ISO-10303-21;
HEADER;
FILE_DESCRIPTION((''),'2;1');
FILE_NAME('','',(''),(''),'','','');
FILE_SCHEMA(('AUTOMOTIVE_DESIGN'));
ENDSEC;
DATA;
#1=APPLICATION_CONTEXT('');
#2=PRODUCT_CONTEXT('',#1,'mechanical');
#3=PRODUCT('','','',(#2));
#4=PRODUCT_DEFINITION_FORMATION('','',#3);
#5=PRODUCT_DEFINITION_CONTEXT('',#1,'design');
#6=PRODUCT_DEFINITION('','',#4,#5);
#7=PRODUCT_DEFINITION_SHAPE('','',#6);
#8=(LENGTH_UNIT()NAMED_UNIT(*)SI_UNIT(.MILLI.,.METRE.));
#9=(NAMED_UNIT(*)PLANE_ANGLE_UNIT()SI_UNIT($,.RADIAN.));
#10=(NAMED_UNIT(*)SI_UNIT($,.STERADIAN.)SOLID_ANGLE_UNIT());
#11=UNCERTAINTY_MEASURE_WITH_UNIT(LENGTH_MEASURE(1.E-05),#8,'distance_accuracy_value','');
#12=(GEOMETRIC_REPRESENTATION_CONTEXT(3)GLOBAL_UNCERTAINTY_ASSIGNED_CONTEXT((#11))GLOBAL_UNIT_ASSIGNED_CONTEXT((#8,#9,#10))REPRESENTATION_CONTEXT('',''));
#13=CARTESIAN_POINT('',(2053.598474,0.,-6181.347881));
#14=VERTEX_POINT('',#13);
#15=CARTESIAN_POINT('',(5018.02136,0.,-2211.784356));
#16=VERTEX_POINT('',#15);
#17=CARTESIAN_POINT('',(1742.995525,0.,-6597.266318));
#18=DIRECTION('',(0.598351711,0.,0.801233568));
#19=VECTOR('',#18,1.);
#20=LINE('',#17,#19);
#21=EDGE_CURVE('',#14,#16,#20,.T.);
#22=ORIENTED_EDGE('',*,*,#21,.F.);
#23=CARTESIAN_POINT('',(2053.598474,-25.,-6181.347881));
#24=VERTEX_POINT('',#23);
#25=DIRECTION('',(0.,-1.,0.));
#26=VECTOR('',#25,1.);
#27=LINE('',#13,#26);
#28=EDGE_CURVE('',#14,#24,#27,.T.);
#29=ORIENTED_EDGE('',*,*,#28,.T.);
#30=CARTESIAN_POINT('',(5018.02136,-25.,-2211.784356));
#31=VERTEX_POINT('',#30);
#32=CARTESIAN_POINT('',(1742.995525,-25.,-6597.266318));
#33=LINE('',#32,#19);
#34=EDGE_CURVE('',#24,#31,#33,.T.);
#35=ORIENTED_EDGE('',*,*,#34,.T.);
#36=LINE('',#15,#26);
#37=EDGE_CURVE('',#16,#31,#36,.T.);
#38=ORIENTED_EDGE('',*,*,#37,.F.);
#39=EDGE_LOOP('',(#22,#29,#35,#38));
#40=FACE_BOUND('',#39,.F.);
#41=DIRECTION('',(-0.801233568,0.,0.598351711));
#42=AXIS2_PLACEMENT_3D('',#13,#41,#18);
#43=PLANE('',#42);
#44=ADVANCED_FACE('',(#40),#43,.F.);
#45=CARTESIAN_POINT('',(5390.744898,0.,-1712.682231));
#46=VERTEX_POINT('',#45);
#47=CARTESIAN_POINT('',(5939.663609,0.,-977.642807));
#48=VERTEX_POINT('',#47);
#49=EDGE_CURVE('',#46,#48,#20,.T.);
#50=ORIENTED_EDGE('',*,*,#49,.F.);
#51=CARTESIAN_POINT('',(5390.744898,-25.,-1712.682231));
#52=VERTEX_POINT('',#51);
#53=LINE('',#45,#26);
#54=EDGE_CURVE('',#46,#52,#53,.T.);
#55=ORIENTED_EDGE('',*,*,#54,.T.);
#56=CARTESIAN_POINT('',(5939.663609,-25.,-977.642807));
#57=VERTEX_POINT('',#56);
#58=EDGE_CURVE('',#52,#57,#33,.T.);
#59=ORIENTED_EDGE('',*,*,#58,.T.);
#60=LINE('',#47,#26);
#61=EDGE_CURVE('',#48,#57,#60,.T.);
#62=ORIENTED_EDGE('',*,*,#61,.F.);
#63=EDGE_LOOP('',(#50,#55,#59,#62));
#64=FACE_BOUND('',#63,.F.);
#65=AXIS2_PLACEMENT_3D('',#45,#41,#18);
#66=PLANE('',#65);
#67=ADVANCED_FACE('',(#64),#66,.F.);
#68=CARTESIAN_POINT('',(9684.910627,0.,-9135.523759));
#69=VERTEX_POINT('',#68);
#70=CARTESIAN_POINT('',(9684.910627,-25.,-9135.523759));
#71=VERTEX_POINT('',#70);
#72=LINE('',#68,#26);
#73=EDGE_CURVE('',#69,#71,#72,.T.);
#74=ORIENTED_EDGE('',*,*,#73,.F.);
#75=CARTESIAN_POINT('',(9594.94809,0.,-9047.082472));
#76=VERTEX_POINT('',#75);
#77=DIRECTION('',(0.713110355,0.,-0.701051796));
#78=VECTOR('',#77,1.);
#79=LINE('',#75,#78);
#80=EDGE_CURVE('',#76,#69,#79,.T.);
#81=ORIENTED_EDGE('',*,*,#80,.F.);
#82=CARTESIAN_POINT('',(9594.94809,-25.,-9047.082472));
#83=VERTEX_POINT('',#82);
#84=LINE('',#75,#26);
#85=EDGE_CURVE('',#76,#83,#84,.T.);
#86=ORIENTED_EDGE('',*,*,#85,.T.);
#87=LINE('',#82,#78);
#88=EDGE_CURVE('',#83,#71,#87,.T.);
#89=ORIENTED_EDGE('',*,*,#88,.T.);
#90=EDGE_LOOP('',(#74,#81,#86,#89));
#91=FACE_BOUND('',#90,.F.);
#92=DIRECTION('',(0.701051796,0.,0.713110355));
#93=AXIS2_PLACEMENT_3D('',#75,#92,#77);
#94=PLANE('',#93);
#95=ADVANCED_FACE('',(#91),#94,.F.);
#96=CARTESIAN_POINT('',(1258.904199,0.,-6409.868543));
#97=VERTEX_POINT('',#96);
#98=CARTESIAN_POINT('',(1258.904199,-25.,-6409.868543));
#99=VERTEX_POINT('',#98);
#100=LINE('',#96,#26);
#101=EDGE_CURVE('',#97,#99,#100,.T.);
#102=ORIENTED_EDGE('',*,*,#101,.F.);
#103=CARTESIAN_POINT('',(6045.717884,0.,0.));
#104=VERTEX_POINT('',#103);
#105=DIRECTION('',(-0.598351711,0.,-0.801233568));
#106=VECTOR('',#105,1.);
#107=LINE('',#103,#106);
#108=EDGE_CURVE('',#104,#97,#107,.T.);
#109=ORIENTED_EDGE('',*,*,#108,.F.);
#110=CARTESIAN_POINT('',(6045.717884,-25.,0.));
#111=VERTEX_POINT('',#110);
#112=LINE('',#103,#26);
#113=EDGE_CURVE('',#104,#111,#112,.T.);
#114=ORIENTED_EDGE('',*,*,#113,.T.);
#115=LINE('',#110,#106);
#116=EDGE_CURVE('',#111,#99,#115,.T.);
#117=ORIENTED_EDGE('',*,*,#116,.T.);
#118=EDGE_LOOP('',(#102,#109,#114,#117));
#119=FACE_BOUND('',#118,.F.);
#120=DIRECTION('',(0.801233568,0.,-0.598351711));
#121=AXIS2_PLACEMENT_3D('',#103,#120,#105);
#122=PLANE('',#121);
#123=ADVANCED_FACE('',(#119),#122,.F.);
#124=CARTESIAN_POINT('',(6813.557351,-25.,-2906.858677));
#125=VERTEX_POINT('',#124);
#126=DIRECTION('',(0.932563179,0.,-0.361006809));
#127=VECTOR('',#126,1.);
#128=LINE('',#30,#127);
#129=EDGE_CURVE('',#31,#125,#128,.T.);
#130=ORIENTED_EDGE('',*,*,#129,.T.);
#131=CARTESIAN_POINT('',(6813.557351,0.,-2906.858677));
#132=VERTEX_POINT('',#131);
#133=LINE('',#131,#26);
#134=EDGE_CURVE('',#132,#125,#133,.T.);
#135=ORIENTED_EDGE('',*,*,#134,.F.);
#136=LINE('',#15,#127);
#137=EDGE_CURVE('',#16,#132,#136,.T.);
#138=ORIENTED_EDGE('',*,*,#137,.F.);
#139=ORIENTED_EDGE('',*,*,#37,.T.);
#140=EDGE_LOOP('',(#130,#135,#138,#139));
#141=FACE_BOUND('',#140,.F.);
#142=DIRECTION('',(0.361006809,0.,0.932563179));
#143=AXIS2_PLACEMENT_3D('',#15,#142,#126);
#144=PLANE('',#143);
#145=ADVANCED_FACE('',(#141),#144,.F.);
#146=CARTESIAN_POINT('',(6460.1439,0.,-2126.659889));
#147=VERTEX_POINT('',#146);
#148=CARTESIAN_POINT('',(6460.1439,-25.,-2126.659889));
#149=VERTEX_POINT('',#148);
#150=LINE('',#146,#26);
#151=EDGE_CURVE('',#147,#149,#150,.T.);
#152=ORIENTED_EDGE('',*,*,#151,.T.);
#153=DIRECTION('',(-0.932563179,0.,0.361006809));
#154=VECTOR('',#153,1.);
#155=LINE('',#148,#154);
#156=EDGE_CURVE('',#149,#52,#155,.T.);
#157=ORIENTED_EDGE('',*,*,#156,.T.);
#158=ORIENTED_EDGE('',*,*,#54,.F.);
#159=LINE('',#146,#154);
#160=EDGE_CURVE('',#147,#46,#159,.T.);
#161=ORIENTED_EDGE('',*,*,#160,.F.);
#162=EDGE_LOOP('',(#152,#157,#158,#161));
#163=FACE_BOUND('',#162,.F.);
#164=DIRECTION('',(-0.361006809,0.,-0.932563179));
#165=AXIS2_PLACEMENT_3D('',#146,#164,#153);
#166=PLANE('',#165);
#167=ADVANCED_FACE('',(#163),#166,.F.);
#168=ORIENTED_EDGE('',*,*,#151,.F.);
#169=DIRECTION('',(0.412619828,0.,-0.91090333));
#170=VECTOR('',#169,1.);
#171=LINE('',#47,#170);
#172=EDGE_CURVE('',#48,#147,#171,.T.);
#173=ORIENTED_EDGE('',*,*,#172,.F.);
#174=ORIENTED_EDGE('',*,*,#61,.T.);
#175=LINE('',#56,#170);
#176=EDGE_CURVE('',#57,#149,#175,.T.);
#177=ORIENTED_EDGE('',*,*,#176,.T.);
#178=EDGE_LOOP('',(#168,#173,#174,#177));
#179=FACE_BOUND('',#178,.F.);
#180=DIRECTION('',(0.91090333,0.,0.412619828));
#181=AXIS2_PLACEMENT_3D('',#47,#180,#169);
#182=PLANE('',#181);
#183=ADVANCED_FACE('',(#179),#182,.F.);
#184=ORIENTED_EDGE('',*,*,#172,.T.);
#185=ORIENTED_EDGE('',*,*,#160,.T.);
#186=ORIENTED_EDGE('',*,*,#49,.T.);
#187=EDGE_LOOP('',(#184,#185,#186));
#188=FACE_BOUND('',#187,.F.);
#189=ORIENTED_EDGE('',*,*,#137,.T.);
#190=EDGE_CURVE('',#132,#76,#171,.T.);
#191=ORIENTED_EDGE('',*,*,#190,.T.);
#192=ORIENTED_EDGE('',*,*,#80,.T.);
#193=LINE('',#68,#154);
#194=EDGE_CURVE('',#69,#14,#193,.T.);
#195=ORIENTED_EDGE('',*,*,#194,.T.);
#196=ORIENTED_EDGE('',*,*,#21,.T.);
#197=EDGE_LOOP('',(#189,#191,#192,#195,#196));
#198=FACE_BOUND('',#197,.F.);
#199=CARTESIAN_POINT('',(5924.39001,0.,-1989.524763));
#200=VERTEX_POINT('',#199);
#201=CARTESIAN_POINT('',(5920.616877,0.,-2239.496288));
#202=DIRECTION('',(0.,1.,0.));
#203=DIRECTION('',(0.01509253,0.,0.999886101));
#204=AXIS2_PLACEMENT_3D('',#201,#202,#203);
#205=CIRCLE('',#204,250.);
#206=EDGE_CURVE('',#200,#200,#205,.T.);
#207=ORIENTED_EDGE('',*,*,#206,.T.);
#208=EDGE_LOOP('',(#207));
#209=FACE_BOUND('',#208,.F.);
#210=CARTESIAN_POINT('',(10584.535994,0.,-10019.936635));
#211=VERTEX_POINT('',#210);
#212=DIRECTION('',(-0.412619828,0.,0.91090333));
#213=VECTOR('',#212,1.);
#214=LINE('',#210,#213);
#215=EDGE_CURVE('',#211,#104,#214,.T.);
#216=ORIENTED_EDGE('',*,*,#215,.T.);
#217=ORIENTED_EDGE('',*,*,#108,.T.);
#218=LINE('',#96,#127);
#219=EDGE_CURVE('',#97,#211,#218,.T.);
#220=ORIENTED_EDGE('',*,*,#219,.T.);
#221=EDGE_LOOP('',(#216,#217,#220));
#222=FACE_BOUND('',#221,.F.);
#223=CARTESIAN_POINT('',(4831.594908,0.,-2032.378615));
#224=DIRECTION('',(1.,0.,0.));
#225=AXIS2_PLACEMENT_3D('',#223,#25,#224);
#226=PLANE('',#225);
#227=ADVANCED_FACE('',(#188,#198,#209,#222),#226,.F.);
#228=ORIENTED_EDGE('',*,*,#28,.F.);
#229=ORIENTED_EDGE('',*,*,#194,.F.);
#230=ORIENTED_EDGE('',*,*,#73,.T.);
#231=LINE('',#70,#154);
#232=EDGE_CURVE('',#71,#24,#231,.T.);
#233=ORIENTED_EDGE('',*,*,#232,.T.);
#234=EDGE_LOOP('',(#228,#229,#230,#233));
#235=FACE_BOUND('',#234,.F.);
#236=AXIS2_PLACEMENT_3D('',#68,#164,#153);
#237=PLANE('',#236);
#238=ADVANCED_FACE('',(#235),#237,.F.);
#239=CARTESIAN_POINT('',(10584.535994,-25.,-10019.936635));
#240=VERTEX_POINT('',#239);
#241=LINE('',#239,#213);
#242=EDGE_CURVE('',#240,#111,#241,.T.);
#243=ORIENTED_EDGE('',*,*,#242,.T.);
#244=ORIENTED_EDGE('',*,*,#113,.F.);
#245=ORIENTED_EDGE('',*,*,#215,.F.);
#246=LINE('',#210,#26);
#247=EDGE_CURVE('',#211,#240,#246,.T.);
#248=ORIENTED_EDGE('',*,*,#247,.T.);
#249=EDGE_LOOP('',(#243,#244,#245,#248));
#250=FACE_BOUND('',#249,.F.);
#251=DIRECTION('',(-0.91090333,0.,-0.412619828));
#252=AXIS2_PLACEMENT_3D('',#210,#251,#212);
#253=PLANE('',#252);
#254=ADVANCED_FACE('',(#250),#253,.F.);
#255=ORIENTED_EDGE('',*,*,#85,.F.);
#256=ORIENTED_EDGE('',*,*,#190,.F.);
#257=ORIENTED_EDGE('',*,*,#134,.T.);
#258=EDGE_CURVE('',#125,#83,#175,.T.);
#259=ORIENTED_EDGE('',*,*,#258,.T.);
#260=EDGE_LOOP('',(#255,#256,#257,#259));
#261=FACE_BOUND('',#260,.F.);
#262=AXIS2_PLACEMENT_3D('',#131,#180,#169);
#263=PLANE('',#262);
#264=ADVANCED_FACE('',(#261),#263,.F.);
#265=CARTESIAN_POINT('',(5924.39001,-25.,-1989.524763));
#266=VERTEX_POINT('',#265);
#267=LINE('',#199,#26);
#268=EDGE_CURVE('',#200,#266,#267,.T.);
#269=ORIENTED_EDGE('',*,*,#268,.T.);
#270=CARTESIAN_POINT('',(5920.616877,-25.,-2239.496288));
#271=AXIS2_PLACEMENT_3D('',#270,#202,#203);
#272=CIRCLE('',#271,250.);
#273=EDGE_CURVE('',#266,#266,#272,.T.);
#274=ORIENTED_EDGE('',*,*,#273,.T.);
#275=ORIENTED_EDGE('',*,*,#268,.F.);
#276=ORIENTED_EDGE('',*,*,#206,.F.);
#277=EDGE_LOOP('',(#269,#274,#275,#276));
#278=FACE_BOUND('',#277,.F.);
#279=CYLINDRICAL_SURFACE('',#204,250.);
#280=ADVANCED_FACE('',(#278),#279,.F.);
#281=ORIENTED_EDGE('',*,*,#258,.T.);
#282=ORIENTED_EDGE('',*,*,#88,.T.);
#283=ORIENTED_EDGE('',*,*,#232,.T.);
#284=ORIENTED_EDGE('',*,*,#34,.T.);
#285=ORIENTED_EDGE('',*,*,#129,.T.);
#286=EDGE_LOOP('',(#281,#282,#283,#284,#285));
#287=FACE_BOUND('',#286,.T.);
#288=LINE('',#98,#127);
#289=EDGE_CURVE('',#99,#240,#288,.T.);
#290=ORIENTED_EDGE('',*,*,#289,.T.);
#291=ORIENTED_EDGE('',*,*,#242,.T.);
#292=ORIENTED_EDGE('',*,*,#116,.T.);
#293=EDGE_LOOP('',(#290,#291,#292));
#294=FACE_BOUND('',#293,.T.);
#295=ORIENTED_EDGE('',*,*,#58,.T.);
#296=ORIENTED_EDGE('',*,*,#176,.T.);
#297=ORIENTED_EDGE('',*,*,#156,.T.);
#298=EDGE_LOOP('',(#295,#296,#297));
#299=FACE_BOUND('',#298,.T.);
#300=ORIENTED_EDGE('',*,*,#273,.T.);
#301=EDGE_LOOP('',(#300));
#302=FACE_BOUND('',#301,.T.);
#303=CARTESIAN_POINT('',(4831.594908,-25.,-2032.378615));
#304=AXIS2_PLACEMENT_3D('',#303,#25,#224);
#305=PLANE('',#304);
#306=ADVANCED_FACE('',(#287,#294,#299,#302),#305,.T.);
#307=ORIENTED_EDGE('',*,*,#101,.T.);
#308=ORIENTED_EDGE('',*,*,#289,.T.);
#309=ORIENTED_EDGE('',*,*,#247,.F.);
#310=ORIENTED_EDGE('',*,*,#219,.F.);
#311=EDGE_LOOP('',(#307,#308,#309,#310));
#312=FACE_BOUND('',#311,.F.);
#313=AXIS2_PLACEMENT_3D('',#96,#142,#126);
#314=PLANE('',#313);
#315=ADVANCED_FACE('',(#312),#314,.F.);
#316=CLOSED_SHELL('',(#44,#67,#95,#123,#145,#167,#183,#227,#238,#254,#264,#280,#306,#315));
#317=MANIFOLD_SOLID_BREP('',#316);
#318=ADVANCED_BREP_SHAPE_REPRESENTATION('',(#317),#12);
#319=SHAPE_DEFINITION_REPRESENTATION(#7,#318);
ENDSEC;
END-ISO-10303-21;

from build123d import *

# Parameters (mm, degrees)
F1_DEPTH = 25


# Not quite as in the source:
# - a feature names something its author has since deleted; it is built from what else it names


with BuildPart() as f1:
    # F0 (on Front) → F1 (new body)
    with BuildSketch(Plane.XZ):
        Polygon((5704.0546409884, -457.5102814203), (3652.3110417295, -3204.934271635), (4012.161188687, -3558.6994219099), (5018.0213600066, -2211.7843558738), (5390.744898264, -1712.6822306881), (5939.6636085267, -977.6428067571), align=None)
        Polygon((6045.7178843911, 0), (5704.0546409884, -457.5102814203), (5939.6636085267, -977.6428067571), (6281.3268519294, -520.1325253368), align=None)
        Polygon((6281.3268519294, -520.1325253368), (5939.6636085267, -977.6428067571), (6460.143900134, -2126.6598891299), (6813.5573514414, -2906.8586771351), (7811.482530577, -5109.8874877281), (8315.1269391623, -5009.9683174769), align=None)
        Polygon((9684.9106265398, -9135.5237592666), (10290.0247845106, -9369.7709782828), (8315.1269391623, -5009.9683174769), (7811.482530577, -5109.8874877281), (9594.9480898004, -9047.0824716979), align=None)
        Polygon((9684.9106265398, -9135.5237592666), (10584.5359939335, -10019.9366349539), (10290.0247845106, -9369.7709782828), align=None)
        Polygon((9624.3992107427, -9112.099037365), (9918.9104201656, -9762.264694036), (10584.5359939335, -10019.9366349539), (9684.9106265398, -9135.5237592666), align=None)
        Polygon((1991.4778842829, -6264.5315683592), (1258.904199068, -6409.8685432701), (1742.9955254446, -6597.266318483), align=None)
        Polygon((1569.5071476159, -5993.9501056153), (1258.904199068, -6409.8685432701), (1991.4778842829, -6264.5315683592), (2053.5984739925, -6181.3478808282), align=None)
        Polygon((3652.3110417295, -3204.934271635), (1569.5071476159, -5993.9501056153), (2053.5984739925, -6181.3478808282), (4012.161188687, -3558.6994219099), align=None)
        Polygon((1991.4778842829, -6264.5315683592), (1742.9955254446, -6597.266318483), (9918.9104201656, -9762.264694036), (9624.3992107427, -9112.099037365), (2174.6213055867, -6228.1973246315), align=None)
        Polygon((2053.5984739925, -6181.3478808282), (1991.4778842829, -6264.5315683592), (2174.6213055866, -6228.1973246315), align=None)
        with BuildLine():
            Line((5390.744898264, -1712.6822306881), (5018.0213600066, -2211.7843558738))
            Line((5018.0213600066, -2211.7843558738), (5915.789355724, -2559.3215165045))
            Line((5915.789355724, -2559.3215165045), (5916.8437449333, -2489.467813527))
            ThreePointArc((5916.8437449333, -2489.467813527), (5670.6453521413, -2235.7231556785), (5924.3900099897, -1989.5247628865))
            Line((5924.3900099897, -1989.5247628865), (5925.444399199, -1919.671059909))
            Line((5925.444399199, -1919.671059909), (5390.744898264, -1712.6822306881))
        make_face()
        with BuildLine():
            Line((6813.5573514414, -2906.8586771351), (6460.143900134, -2126.6598891299))
            Line((6460.143900134, -2126.6598891299), (5925.444399199, -1919.671059909))
            Line((5925.444399199, -1919.671059909), (5924.3900099897, -1989.5247628865))
            ThreePointArc((5924.3900099897, -1989.5247628865), (6098.7225808122, -2064.058668427), (6170.6168774615, -2239.4962882067))
            ThreePointArc((6170.6168774615, -2239.4962882067), (6096.0544972412, -2417.6019915574), (5916.8437449333, -2489.467813527))
            Line((5916.8437449333, -2489.467813527), (5915.789355724, -2559.3215165045))
            Line((5915.789355724, -2559.3215165045), (6813.5573514414, -2906.8586771351))
        make_face()
    extrude(amount=F1_DEPTH)


solid = f1.part
